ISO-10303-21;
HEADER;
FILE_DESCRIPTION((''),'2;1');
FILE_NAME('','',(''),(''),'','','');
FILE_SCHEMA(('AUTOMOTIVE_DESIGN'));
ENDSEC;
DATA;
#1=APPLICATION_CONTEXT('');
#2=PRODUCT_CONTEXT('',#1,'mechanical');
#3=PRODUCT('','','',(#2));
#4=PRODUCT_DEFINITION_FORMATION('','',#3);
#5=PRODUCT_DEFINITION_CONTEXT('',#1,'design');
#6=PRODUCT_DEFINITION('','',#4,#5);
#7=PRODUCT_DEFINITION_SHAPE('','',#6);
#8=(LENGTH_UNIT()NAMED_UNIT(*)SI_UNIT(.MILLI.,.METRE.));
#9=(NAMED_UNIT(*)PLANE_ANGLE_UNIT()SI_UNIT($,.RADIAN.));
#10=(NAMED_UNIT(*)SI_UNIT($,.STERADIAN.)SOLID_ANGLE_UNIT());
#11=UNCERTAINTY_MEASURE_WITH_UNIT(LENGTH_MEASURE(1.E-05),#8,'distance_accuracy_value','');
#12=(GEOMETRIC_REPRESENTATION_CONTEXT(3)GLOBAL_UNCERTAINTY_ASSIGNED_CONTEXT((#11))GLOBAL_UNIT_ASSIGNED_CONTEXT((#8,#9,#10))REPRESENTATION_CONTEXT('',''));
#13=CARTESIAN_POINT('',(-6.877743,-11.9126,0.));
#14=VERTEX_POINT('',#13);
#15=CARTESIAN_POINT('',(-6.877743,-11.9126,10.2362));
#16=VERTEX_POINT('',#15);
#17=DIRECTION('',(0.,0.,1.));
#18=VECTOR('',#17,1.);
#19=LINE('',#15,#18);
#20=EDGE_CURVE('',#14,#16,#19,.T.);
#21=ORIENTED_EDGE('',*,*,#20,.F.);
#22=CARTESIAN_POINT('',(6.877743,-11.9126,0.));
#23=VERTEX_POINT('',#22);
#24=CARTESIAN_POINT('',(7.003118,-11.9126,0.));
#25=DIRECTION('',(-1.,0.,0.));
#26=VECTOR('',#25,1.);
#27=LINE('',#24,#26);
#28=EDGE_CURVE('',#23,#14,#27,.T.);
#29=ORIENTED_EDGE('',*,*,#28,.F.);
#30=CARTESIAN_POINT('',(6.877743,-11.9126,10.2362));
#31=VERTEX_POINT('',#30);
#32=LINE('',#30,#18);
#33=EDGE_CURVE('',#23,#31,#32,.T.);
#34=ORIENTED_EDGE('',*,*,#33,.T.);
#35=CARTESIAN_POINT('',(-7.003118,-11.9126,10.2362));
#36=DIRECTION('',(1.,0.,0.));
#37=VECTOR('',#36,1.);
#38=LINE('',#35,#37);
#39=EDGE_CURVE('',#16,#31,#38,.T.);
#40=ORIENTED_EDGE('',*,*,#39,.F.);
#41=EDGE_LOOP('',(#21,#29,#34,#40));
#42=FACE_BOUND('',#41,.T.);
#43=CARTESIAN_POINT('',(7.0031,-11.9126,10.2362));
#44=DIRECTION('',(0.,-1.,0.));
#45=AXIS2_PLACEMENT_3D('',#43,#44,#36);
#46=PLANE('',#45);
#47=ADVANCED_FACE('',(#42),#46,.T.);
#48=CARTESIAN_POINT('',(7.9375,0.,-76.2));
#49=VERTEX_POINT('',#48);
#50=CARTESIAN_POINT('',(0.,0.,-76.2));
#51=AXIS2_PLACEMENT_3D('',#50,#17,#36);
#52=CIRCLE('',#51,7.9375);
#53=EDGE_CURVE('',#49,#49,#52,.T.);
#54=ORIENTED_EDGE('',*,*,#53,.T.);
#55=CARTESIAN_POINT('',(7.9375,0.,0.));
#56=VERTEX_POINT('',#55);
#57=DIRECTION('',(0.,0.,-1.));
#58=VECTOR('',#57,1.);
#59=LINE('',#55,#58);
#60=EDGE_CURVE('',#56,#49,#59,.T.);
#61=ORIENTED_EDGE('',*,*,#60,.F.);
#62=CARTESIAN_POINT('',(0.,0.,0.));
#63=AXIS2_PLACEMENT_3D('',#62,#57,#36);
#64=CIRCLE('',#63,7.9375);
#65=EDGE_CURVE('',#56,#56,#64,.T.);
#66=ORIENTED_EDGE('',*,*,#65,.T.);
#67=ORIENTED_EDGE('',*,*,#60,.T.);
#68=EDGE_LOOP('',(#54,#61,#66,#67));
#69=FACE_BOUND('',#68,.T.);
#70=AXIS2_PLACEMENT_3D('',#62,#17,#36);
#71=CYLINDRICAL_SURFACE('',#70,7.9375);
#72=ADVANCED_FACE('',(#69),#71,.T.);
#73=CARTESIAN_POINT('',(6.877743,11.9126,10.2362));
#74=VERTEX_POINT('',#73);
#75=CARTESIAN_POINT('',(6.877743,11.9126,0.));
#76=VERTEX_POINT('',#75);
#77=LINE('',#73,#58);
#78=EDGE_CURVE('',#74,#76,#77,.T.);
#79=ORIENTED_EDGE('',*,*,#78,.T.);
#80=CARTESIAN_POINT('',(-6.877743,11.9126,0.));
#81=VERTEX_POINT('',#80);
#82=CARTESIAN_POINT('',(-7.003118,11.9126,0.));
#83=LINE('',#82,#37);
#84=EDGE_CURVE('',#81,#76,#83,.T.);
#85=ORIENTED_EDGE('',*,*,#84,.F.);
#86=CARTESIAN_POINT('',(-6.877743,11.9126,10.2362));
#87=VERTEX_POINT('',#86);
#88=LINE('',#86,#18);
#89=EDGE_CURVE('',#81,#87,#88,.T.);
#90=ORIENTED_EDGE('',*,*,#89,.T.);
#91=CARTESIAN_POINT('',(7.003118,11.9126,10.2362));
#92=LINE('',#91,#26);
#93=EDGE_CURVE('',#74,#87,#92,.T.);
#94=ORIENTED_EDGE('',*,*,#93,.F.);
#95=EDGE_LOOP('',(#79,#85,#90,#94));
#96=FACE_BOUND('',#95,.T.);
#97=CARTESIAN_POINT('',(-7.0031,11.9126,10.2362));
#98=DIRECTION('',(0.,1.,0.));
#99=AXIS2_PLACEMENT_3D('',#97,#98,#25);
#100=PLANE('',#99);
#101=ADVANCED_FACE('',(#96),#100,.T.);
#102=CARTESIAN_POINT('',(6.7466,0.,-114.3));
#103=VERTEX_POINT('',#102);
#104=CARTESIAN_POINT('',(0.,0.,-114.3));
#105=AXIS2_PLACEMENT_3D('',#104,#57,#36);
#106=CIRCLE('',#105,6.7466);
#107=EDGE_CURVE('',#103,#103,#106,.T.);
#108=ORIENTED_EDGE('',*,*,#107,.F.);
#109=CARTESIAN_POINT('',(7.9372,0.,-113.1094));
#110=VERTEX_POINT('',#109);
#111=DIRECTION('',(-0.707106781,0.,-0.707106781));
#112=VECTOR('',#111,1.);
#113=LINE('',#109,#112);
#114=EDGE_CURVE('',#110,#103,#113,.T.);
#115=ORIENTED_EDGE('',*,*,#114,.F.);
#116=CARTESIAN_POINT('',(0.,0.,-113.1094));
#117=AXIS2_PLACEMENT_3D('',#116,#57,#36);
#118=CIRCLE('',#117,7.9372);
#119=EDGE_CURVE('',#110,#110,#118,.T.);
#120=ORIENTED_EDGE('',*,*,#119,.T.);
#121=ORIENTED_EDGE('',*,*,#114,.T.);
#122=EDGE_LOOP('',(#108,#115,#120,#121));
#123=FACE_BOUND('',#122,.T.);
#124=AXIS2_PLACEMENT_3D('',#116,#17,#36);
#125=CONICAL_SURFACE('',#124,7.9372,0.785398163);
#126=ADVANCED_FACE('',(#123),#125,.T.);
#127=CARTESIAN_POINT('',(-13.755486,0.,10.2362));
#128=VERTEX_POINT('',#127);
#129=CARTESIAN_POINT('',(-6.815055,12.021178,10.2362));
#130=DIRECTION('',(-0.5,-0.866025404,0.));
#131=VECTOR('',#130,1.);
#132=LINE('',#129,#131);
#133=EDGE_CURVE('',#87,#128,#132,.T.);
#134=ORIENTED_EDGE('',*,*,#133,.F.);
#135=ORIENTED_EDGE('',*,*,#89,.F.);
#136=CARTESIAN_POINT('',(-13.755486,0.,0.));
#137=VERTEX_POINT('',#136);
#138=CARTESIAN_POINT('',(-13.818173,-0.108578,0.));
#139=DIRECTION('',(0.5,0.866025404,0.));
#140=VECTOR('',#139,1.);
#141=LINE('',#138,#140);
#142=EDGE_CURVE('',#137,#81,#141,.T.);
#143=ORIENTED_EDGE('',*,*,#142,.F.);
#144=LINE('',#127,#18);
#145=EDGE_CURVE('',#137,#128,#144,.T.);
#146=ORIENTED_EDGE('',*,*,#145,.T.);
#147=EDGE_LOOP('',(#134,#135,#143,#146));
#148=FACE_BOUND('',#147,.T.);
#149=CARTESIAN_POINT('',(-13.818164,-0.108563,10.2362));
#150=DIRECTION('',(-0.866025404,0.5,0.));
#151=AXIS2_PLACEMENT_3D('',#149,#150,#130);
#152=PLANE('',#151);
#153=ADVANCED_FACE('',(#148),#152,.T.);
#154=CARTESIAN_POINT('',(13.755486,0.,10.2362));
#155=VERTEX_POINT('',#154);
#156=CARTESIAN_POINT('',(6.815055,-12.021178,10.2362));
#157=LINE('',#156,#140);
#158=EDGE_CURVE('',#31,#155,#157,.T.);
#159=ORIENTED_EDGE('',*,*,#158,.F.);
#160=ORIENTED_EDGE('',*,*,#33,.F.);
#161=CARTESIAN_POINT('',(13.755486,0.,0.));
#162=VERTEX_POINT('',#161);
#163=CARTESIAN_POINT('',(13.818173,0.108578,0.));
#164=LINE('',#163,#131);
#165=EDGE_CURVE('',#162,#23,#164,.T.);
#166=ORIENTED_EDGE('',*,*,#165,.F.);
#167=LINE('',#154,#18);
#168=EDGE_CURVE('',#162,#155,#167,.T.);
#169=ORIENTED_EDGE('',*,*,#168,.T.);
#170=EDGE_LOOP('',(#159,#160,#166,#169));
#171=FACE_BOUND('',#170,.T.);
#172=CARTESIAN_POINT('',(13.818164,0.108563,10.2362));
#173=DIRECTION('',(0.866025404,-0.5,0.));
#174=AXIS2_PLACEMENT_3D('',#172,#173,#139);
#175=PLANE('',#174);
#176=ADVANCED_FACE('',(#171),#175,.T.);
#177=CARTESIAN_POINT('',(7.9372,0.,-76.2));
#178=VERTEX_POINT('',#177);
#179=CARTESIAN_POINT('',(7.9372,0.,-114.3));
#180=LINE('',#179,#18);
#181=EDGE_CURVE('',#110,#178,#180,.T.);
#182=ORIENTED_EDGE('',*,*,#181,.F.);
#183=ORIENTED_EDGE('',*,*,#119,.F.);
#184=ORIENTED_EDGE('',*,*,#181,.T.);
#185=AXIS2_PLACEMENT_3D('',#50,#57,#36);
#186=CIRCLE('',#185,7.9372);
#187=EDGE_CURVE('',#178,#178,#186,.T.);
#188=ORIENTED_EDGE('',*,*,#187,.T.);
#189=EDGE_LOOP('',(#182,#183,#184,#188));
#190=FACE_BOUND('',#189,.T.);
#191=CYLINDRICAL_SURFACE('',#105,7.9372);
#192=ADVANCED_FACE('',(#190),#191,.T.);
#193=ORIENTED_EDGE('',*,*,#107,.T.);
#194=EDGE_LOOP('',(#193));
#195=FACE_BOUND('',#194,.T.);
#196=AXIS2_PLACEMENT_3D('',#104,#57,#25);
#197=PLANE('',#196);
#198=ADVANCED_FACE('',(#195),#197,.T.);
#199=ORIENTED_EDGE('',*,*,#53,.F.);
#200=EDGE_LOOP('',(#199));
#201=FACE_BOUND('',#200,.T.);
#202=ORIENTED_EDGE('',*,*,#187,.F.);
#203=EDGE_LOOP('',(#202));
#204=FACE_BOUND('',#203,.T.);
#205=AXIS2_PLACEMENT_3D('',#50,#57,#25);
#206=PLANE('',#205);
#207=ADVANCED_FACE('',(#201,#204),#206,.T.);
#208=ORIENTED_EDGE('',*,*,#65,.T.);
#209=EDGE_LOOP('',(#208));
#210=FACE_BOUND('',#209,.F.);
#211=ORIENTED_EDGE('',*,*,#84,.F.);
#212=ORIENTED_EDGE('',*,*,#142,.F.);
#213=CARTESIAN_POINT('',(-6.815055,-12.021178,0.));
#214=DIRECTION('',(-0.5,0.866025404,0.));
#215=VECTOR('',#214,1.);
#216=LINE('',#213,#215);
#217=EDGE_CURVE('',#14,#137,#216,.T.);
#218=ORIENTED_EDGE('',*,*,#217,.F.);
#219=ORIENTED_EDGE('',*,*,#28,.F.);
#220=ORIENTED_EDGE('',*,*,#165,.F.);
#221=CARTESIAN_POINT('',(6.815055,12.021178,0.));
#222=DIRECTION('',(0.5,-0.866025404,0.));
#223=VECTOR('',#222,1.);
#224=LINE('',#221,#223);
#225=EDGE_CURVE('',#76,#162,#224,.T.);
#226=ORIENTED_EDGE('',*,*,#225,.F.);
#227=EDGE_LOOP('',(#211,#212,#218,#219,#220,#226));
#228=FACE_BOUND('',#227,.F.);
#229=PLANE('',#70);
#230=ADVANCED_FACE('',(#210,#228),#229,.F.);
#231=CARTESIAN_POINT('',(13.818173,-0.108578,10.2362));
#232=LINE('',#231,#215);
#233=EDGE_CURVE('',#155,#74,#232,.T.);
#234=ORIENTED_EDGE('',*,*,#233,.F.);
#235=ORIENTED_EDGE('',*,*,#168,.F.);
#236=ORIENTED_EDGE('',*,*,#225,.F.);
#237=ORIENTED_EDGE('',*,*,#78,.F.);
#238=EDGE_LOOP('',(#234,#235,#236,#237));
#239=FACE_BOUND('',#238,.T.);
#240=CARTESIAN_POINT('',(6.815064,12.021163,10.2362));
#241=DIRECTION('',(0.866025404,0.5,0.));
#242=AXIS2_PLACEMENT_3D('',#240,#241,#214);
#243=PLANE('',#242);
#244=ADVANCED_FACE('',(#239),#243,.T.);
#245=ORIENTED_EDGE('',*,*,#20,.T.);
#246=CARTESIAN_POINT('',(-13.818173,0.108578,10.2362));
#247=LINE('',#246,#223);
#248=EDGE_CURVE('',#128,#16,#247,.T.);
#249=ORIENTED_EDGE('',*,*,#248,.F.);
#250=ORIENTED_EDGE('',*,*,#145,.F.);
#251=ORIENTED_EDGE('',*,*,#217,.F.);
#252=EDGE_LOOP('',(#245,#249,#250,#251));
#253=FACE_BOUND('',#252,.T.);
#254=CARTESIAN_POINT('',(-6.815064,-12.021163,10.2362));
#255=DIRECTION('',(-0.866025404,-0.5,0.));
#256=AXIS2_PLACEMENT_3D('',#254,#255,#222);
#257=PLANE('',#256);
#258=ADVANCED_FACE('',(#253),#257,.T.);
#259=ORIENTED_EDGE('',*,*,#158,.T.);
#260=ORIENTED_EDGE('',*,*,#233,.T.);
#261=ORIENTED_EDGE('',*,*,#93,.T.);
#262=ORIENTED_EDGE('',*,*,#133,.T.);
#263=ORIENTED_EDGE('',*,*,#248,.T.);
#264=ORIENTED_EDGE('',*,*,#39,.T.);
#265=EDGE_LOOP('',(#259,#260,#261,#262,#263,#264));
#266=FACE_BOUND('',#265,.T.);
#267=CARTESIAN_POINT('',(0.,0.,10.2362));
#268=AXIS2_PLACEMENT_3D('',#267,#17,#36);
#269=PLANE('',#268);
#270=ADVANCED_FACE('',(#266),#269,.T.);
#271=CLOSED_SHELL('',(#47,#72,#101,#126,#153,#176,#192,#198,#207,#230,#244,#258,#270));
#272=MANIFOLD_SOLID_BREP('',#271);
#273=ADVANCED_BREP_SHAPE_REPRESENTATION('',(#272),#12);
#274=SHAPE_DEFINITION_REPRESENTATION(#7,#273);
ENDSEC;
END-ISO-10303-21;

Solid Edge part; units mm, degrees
sketch "Sketch1" plane through (0, 0, 0) normal (0, 0, 1) x (1, 0, 0)
  circle A0 centre (0, 0) radius 13.8186
  dimension "D1" = 27.6372
extrude "Protrusion1" add sketch "Sketch1" along normal blind 10.2362
sketch "Sketch2" plane through (0, 0, 0) normal (0, 0, -1) x (1, 0, 0)
  circle A0 centre (0, 0) radius 7.9375
extrude "Protrusion2" add sketch "Sketch2" along normal blind 114.3
sketch "Sketch3" plane through (0, 0, -114.3) normal (0, 0, -1) x (1, 0, 0)
  circle A0 centre (0, 0) radius 7.9372
extrude "Cutout1" cut sketch "Sketch3" against normal blind 38.1 flip side to cut
chamfer "Chamfer_1" distance 1.1906 angle 45 1 edges at (-7.9372, 0, -114.3)
sketch "Sketch4" plane through (0, 0, 10.2362) normal (0, 0, 1) x (1, 0, 0)
  line L0 (-7.0031, 11.9126) -> (7.0031, 11.9126)
  dimension "D1" = 23.8252
extrude "Cutout2" cut sketch "Sketch4" against normal up to next material side at (0, 11.9626, 10.2362)
pattern_circular "Pattern1" count 6 over 360 about axis through (0, 0, 10.2362) along (0, 0, 1) of "Cutout2"
properties part number "117591"
